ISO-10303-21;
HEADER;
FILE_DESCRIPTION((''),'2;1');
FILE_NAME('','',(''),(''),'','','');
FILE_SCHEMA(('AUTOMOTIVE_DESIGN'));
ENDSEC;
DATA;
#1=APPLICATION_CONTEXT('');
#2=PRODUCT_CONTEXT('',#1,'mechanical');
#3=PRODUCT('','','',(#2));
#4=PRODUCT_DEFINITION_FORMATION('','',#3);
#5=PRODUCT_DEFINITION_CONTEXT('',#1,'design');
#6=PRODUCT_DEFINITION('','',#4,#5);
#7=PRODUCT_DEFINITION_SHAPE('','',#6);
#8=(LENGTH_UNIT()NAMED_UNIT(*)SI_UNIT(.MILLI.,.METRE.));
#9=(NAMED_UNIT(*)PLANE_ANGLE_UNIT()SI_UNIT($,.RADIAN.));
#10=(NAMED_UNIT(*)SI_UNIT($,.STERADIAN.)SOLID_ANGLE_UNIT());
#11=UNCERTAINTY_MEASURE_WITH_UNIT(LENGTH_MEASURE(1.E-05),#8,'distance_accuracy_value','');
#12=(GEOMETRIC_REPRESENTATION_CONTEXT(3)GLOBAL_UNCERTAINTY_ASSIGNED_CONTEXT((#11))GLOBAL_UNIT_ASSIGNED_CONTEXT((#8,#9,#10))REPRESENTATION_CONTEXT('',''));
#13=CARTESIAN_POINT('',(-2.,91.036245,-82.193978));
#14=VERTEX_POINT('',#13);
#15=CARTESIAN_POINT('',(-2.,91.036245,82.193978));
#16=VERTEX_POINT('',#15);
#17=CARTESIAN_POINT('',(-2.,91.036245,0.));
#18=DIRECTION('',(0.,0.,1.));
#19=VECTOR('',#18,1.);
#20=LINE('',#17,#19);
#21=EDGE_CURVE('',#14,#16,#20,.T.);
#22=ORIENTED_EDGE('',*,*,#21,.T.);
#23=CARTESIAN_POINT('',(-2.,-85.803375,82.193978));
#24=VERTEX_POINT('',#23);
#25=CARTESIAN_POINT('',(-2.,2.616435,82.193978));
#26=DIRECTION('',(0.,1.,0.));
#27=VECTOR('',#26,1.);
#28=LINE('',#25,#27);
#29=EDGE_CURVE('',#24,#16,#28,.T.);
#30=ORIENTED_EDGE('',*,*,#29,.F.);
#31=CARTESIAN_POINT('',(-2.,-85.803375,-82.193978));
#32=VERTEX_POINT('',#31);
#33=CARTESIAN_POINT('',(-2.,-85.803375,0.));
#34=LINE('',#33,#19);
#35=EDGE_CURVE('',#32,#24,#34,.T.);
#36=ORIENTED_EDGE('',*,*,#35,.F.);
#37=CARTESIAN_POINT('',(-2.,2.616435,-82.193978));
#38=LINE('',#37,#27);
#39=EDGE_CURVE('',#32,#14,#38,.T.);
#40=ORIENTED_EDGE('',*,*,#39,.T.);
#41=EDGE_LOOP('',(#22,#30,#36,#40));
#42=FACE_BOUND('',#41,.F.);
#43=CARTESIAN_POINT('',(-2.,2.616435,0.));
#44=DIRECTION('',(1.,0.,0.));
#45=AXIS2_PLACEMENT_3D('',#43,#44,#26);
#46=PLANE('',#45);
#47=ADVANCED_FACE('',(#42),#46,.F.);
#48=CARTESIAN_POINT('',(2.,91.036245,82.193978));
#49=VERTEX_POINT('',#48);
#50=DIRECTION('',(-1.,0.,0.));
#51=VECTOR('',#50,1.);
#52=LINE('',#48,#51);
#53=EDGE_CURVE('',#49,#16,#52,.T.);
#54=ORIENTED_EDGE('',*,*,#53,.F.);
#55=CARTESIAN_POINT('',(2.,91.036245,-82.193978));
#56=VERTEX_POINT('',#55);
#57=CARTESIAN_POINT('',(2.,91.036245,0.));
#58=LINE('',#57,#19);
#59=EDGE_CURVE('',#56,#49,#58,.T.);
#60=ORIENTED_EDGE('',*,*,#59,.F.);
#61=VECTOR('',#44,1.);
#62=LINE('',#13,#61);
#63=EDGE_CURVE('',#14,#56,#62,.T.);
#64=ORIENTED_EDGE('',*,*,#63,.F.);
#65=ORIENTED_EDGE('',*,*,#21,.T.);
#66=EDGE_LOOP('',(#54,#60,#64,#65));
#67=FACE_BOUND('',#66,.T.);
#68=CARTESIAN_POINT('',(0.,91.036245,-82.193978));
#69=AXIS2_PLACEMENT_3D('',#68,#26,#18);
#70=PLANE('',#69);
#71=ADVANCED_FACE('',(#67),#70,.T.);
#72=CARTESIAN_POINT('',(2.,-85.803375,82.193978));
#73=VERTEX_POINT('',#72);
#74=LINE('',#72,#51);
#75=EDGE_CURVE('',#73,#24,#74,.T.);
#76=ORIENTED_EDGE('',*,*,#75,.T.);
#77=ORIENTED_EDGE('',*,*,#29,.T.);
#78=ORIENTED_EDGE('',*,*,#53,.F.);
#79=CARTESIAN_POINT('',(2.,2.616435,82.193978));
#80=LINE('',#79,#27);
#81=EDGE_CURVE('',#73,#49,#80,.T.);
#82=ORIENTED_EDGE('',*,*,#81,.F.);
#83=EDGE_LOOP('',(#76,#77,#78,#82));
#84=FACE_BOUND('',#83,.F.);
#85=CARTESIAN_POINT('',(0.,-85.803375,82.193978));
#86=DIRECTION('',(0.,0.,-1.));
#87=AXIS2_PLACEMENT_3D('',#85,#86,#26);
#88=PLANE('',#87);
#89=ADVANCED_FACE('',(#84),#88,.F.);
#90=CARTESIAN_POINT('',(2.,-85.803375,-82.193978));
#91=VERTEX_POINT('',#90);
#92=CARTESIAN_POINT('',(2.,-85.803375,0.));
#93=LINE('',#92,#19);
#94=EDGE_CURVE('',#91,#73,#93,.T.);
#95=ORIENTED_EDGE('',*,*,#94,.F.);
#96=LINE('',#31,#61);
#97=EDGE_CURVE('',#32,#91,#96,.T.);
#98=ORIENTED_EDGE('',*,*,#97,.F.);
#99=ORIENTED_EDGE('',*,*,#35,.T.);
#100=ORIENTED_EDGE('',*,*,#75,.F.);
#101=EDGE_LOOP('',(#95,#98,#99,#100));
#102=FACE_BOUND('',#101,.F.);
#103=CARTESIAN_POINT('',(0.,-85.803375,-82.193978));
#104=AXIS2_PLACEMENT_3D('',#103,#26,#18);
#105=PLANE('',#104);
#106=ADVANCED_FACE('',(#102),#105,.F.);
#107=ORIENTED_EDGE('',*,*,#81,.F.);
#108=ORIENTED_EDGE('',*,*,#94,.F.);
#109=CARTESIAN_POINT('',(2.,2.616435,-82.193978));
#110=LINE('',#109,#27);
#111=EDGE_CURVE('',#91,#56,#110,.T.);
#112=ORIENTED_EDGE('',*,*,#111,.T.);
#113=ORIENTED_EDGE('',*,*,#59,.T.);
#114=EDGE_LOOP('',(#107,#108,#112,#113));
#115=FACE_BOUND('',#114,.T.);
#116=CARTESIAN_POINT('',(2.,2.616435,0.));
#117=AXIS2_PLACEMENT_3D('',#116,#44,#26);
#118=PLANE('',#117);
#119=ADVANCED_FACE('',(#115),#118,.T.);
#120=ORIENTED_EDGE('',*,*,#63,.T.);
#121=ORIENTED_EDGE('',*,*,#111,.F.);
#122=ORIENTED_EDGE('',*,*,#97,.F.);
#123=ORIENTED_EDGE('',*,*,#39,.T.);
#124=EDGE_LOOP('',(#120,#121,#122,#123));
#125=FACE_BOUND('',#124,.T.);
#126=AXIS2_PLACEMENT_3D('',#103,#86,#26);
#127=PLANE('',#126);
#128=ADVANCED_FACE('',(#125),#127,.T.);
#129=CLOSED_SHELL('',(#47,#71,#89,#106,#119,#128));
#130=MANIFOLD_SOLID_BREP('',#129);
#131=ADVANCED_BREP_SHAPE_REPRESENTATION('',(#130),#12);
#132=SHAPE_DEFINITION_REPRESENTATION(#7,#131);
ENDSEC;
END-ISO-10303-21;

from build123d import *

# Parameters (mm, degrees)
F0_W          = 176.839619875
F0_H          = 164.3879562616
F1_DEPTH      = 2
F1_DEPTH_BACK = 2


# Not quite as in the source:
# - the program builds the solid bodies; features that only make, move or delete a surface that nothing else refers to are left out


with BuildPart() as f1:
    # F0 (on Right) → F1 (new body, two sides)
    with BuildSketch(Plane.YZ) as f1_sk:
        with Locations((2.6164352894, 0)):
            Rectangle(F0_W, F0_H)
    extrude(amount=F1_DEPTH)
    extrude(f1_sk.sketch, amount=-F1_DEPTH_BACK)


solid = f1.part
